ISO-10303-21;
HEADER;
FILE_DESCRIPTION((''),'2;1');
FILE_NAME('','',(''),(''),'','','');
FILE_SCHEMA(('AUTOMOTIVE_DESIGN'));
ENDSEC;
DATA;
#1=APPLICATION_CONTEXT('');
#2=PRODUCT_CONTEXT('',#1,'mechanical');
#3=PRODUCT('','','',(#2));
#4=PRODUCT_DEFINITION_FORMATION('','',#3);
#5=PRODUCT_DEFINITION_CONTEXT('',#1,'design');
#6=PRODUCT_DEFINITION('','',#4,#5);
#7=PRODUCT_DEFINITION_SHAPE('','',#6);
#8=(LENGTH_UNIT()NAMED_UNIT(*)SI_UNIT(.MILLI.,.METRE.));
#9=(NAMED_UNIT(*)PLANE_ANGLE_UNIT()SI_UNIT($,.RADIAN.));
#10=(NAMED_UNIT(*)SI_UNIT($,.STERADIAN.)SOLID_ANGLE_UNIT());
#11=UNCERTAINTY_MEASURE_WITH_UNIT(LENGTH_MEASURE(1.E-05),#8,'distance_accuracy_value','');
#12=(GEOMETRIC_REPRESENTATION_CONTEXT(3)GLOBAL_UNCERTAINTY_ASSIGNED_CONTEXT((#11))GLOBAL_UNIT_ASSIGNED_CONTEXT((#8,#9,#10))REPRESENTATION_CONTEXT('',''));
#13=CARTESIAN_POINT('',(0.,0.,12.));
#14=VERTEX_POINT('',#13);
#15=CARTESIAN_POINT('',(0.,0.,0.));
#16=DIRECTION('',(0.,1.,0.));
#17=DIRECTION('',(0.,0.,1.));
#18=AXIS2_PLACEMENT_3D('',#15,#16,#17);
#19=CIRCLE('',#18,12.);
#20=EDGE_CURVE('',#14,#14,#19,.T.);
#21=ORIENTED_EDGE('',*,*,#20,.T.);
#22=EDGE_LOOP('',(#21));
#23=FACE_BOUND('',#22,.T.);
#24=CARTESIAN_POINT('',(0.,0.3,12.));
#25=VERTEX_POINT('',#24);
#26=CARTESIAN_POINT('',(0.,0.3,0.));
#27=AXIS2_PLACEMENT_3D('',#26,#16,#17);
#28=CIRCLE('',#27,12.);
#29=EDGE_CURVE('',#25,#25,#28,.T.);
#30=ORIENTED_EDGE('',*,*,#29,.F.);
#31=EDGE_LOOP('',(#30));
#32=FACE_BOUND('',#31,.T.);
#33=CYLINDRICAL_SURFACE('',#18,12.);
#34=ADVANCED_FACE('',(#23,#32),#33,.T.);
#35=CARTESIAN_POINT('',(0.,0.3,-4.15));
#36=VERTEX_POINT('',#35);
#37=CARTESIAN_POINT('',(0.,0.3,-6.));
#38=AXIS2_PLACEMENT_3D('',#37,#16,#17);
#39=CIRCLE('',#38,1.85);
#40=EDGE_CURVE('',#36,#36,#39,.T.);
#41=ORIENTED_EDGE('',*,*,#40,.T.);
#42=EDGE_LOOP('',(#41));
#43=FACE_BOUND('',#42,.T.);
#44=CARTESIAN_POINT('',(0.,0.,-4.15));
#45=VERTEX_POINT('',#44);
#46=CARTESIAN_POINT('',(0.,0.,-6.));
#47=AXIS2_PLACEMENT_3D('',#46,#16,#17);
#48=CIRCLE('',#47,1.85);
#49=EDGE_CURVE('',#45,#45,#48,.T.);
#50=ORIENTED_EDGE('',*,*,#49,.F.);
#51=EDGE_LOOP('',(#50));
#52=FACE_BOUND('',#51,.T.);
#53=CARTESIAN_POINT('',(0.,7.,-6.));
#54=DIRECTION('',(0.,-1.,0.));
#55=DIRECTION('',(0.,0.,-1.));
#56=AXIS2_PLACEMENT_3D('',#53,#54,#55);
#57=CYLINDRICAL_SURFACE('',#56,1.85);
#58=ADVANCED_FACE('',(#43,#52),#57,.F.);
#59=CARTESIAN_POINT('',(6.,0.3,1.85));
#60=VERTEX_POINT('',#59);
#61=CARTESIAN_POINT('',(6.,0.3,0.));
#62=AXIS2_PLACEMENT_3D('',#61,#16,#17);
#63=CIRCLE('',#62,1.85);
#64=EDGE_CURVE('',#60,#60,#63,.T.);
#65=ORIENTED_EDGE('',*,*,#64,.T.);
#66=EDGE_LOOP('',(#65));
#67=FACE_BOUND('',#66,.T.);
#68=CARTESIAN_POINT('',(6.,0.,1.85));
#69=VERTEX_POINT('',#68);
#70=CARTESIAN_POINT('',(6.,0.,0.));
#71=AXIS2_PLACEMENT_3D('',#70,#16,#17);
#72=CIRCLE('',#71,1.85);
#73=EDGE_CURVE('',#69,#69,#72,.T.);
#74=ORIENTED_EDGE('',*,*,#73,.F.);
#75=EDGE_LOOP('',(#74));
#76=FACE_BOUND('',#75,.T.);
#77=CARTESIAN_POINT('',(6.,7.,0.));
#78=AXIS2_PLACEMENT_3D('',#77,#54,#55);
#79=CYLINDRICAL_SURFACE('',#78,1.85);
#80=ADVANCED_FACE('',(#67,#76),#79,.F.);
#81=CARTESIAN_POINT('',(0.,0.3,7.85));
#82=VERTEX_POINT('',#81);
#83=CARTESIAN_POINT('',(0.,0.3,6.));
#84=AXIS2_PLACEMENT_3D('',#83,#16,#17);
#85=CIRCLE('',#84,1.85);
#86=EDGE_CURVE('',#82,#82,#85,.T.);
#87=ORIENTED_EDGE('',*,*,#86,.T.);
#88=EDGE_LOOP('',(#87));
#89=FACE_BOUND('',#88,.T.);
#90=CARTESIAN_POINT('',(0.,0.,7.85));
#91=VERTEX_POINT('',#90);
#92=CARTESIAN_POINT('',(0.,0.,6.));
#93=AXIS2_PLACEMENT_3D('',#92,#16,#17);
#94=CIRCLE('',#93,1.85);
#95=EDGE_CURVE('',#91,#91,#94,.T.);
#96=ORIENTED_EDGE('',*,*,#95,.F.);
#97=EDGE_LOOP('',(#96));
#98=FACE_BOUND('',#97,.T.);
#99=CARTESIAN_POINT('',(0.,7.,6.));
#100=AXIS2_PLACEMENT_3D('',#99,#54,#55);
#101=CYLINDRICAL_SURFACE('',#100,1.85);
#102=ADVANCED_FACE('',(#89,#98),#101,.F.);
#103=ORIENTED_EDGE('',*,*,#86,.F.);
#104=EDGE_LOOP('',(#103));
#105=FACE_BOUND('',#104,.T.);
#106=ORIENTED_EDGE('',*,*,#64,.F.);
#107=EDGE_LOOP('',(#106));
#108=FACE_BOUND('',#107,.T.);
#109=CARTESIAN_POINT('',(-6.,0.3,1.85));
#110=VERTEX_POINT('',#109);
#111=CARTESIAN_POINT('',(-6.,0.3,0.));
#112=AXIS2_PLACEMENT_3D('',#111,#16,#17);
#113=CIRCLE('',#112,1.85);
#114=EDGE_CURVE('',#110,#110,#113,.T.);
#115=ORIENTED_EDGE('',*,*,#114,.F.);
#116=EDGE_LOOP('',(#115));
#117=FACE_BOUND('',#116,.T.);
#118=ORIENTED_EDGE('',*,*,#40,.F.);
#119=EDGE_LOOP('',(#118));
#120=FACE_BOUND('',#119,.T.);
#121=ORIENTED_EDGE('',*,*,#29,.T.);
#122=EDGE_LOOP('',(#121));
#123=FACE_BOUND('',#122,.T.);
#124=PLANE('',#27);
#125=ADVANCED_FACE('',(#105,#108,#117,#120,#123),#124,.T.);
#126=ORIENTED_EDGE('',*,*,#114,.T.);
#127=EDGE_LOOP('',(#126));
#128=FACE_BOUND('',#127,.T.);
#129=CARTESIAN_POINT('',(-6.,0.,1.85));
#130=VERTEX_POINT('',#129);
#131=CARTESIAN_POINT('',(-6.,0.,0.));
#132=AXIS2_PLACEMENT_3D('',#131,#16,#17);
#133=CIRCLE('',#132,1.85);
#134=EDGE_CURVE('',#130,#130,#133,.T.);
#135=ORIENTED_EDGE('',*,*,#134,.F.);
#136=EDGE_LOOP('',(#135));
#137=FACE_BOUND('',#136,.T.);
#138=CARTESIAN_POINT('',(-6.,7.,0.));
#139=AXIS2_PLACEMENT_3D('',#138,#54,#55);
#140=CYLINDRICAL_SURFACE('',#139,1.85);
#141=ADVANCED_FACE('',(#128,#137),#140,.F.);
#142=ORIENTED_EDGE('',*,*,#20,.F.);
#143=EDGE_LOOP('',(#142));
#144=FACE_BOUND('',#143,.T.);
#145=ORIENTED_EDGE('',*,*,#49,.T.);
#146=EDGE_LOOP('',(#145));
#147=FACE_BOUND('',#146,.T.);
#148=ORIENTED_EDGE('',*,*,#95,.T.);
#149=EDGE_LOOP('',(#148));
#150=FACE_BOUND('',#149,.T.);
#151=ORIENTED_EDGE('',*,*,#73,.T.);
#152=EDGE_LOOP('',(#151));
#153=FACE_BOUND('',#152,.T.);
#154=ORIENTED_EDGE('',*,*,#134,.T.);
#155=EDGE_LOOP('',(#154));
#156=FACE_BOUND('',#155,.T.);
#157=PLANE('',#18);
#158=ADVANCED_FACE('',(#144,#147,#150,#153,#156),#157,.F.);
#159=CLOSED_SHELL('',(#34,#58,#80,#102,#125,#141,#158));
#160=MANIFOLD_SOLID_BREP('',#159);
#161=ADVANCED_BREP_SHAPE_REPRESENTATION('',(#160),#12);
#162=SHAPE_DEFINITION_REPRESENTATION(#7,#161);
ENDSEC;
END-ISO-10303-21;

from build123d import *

# Parameters (mm, degrees)
SKETCH_1_R          = 9.9
SKETCH_1_R_2        = 1.85
EXTRUDE_1_DEPTH     = 7
SKETCH_2_R          = 12.5
SKETCH_2_R_2        = 1.85
EXTRUDE_2_DEPTH     = 2.5
SKETCH_3_R          = 3.75
EXTRUDE_3_DEPTH     = 6.3
CHAMFER_1_SIZE      = 2
SKETCH_4_R          = 41.5
CUT_EXTRUDE_1_DEPTH = 15.5
EXTRUDE_START       = -0.3
SKETCH_5_R          = 12
SKETCH_5_R_2        = 9.9
EXTRUDE_4_DEPTH     = 0.3


with BuildPart() as part:
    # 草图1 → 凸台-拉伸1 (new body)
    with BuildSketch(Plane(origin=(0, 0, 0), x_dir=(1, 0, 0), z_dir=(0, 1, 0))):
        with Locations(Location((0, 0, 0), (0, 0, 270))):
            Circle(SKETCH_1_R)
        with Locations(Location((6, 0, 0), (0, 0, 270))):
            Circle(SKETCH_1_R_2, mode=Mode.SUBTRACT)
        with Locations(Location((0, -6, 0), (0, 0, 270))):
            Circle(SKETCH_1_R_2, mode=Mode.SUBTRACT)
        with Locations(Location((-6, 0, 0), (0, 0, 270))):
            Circle(SKETCH_1_R_2, mode=Mode.SUBTRACT)
        with Locations(Location((0, 6, 0), (0, 0, 270))):
            Circle(SKETCH_1_R_2, mode=Mode.SUBTRACT)
    extrude(amount=EXTRUDE_1_DEPTH)

    # 草图2 → 凸台-拉伸2 (add)
    with BuildSketch(Plane(origin=(0, 7, 0), x_dir=(1, 0, 0), z_dir=(0, 1, 0))):
        with Locations(Location((0, 0, 0), (0, 0, 270))):
            Circle(SKETCH_2_R)
        with Locations(Location((-6, 0, 0), (0, 0, 270))):
            Circle(SKETCH_2_R_2, mode=Mode.SUBTRACT)
        with Locations(Location((0, -6, 0), (0, 0, 270))):
            Circle(SKETCH_2_R_2, mode=Mode.SUBTRACT)
        with Locations(Location((6, 0, 0), (0, 0, 270))):
            Circle(SKETCH_2_R_2, mode=Mode.SUBTRACT)
        with Locations(Location((0, 6, 0), (0, 0, 270))):
            Circle(SKETCH_2_R_2, mode=Mode.SUBTRACT)
    extrude(amount=EXTRUDE_2_DEPTH)

    # 草图3 → 凸台-拉伸3 (add)
    # profile 1 of 8: a face of its own
    with BuildSketch(Plane(origin=(0, 9.5, 0), x_dir=(1, 0, 0), z_dir=(0, 1, 0))):
        with BuildLine():
            Line((2.25, 0), (-2.25, 0))
            ThreePointArc((-2.25, 0), (-6, -3.75), (-9.75, 0))
            Line((-9.75, 0), (-12.5, 0))
            ThreePointArc((-12.5, 0), (-3.952847075, -11.858541226), (10, -7.5))
            ThreePointArc((10, -7.5), (11.858541226, -3.952847075), (12.5, 0))
            Line((12.5, 0), (9.75, 0))
            ThreePointArc((9.75, 0), (6, -3.75), (2.25, 0))
        make_face()
        with Locations(Location((0, -6, 0), (0, 0, 270))):
            Circle(SKETCH_3_R, mode=Mode.SUBTRACT)
    # profile 2 of 8: a face of its own
    with BuildSketch(Plane(origin=(0, 9.5, 0), x_dir=(1, 0, 0), z_dir=(0, 1, 0))):
        with BuildLine():
            ThreePointArc((-9.75, 0), (-6, 3.75), (-2.25, 0))
            Line((-2.25, 0), (2.25, 0))
            ThreePointArc((2.25, 0), (6, 3.75), (9.75, 0))
            Line((9.75, 0), (12.5, 0))
            ThreePointArc((12.5, 0), (11.858541226, 3.952847075), (10, 7.5))
            ThreePointArc((10, 7.5), (-3.952847075, 11.858541226), (-12.5, 0))
            Line((-12.5, 0), (-9.75, 0))
        make_face()
        with Locations(Location((0, 6, 0), (0, 0, 270))):
            Circle(SKETCH_3_R, mode=Mode.SUBTRACT)
    # profile 3 of 8: a face of its own
    with BuildSketch(Plane(origin=(0, 9.5, 0), x_dir=(1, 0, 0), z_dir=(0, 1, 0))):
        with BuildLine():
            ThreePointArc((10, 7.5), (11.858541226, 3.952847075), (12.5, 0))
            Line((12.5, 0), (25.5, 0))
            ThreePointArc((25.5, 0), (27.696699141, 5.303300859), (33, 7.5))
            Line((33, 7.5), (10, 7.5))
        make_face()
    # profile 4 of 8: a face of its own
    with BuildSketch(Plane(origin=(0, 9.5, 0), x_dir=(1, 0, 0), z_dir=(0, 1, 0))):
        with BuildLine():
            Line((25.5, 0), (12.5, 0))
            ThreePointArc((12.5, 0), (11.858541226, -3.952847075), (10, -7.5))
            Line((10, -7.5), (33, -7.5))
            ThreePointArc((33, -7.5), (27.696699141, -5.303300859), (25.5, 0))
        make_face()
    # profile 5 of 8: a face of its own
    with BuildSketch(Plane(origin=(0, 9.5, 0), x_dir=(1, 0, 0), z_dir=(0, 1, 0))):
        with BuildLine():
            ThreePointArc((33, 7.5), (27.696699141, 5.303300859), (25.5, 0))
            Line((25.5, 0), (28.65, 0))
            ThreePointArc((28.65, 0), (33, 4.35), (37.35, 0))
            Line((37.35, 0), (40.5, 0))
            ThreePointArc((40.5, 0), (38.303300859, 5.303300859), (33, 7.5))
        make_face()
    # profile 6 of 8: a face of its own
    with BuildSketch(Plane(origin=(0, 9.5, 0), x_dir=(1, 0, 0), z_dir=(0, 1, 0))):
        with BuildLine():
            Line((28.65, 0), (25.5, 0))
            ThreePointArc((25.5, 0), (27.696699141, -5.303300859), (33, -7.5))
            ThreePointArc((33, -7.5), (38.303300859, -5.303300859), (40.5, 0))
            Line((40.5, 0), (37.35, 0))
            ThreePointArc((37.35, 0), (33, -4.35), (28.65, 0))
        make_face()
    # profile 7 of 8: a face of its own
    with BuildSketch(Plane(origin=(0, 9.5, 0), x_dir=(1, 0, 0), z_dir=(0, 1, 0))):
        with BuildLine():
            ThreePointArc((33, 7.5), (27.696699141, 5.303300859), (25.5, 0))
            Line((25.5, 0), (28.65, 0))
            ThreePointArc((28.65, 0), (33, 4.35), (37.35, 0))
            Line((37.35, 0), (40.5, 0))
            ThreePointArc((40.5, 0), (38.303300859, 5.303300859), (33, 7.5))
        make_face()
    # profile 8 of 8: a face of its own
    with BuildSketch(Plane(origin=(0, 9.5, 0), x_dir=(1, 0, 0), z_dir=(0, 1, 0))):
        with BuildLine():
            Line((28.65, 0), (25.5, 0))
            ThreePointArc((25.5, 0), (27.696699141, -5.303300859), (33, -7.5))
            ThreePointArc((33, -7.5), (38.303300859, -5.303300859), (40.5, 0))
            Line((40.5, 0), (37.35, 0))
            ThreePointArc((37.35, 0), (33, -4.35), (28.65, 0))
        make_face()
    extrude(amount=EXTRUDE_3_DEPTH)

    # 倒角1
    # the kernel refuses this chamfer: 2 mm, written as the material it adds along each edge
    with BuildSketch(Plane(origin=(0, 9.5, 6), x_dir=(0, 0, 1), z_dir=(-1, 0, 0))) as chamfer_1_piece_1_section:
        Polygon((3.75 - CHAMFER_1_SIZE, 0), (3.75, CHAMFER_1_SIZE), (3.75, 0), align=None)
    chamfer_1_piece_1 = revolve(axis=Axis((0, 9.5, 6), (0, 1, 0)), mode=Mode.PRIVATE)
    chamfer_1_piece_1 = chamfer_1_piece_1 - Plane(origin=(0, 10.553600351, 6), x_dir=(0, 0, 1), z_dir=(0, -1, 0)) * Cylinder(1.85, 15, mode=Mode.PRIVATE)
    add(chamfer_1_piece_1)
    with BuildSketch(Plane(origin=(-6, 9.5, 0), x_dir=(-1, 0, 0), z_dir=(0, 0, 1))) as chamfer_1_piece_2_section:
        Polygon((3.75 - CHAMFER_1_SIZE, 0), (3.75, -CHAMFER_1_SIZE), (3.75, 0), align=None)
    chamfer_1_piece_2 = revolve(axis=Axis((-6, 9.5, 0), (0, -1, 0)), mode=Mode.PRIVATE)
    chamfer_1_piece_2 = chamfer_1_piece_2 - Plane(origin=(-6, 10.553600351, 0), x_dir=(0, 0, 1), z_dir=(0, -1, 0)) * Cylinder(1.85, 15, mode=Mode.PRIVATE)
    add(chamfer_1_piece_2)
    with BuildSketch(Plane(origin=(0, 9.5, -6), x_dir=(0, 0, 1), z_dir=(-1, 0, 0))) as chamfer_1_piece_3_section:
        Polygon((3.75 - CHAMFER_1_SIZE, 0), (3.75, CHAMFER_1_SIZE), (3.75, 0), align=None)
    chamfer_1_piece_3 = revolve(axis=Axis((0, 9.5, -6), (0, 1, 0)), mode=Mode.PRIVATE)
    chamfer_1_piece_3 = chamfer_1_piece_3 - Plane(origin=(0, 10.553600351, -6), x_dir=(0, 0, 1), z_dir=(0, -1, 0)) * Cylinder(1.85, 16, mode=Mode.PRIVATE)
    add(chamfer_1_piece_3)
    with BuildSketch(Plane(origin=(6, 9.5, 0), x_dir=(1, 0, 0), z_dir=(0, 0, -1))) as chamfer_1_piece_4_section:
        Polygon((3.75 - CHAMFER_1_SIZE, 0), (3.75, -CHAMFER_1_SIZE), (3.75, 0), align=None)
    chamfer_1_piece_4 = revolve(axis=Axis((6, 9.5, 0), (0, -1, 0)), mode=Mode.PRIVATE)
    chamfer_1_piece_4 = chamfer_1_piece_4 - Plane(origin=(6, 10.553600351, 0), x_dir=(0, 0, 1), z_dir=(0, -1, 0)) * Cylinder(1.85, 15, mode=Mode.PRIVATE)
    add(chamfer_1_piece_4)

    # 草图4 → 切除-拉伸1 (cut)
    with BuildSketch(Plane(origin=(0, 15.8, 0), x_dir=(1, 0, 0), z_dir=(0, 1, 0))):
        Circle(SKETCH_4_R)
    extrude(amount=-CUT_EXTRUDE_1_DEPTH, mode=Mode.SUBTRACT)

    # 草图5 → 凸台-拉伸4 (add)
    with BuildSketch(Plane(origin=(0, 0.3, 0), x_dir=(1, 0, 0), z_dir=(0, 1, 0)).offset(EXTRUDE_START)):
        with Locations(Location((0, 0, 0), (0, 0, 270))):
            Circle(SKETCH_5_R)
        Circle(SKETCH_5_R_2, mode=Mode.SUBTRACT)
    extrude(amount=EXTRUDE_4_DEPTH)


solid = part.part
